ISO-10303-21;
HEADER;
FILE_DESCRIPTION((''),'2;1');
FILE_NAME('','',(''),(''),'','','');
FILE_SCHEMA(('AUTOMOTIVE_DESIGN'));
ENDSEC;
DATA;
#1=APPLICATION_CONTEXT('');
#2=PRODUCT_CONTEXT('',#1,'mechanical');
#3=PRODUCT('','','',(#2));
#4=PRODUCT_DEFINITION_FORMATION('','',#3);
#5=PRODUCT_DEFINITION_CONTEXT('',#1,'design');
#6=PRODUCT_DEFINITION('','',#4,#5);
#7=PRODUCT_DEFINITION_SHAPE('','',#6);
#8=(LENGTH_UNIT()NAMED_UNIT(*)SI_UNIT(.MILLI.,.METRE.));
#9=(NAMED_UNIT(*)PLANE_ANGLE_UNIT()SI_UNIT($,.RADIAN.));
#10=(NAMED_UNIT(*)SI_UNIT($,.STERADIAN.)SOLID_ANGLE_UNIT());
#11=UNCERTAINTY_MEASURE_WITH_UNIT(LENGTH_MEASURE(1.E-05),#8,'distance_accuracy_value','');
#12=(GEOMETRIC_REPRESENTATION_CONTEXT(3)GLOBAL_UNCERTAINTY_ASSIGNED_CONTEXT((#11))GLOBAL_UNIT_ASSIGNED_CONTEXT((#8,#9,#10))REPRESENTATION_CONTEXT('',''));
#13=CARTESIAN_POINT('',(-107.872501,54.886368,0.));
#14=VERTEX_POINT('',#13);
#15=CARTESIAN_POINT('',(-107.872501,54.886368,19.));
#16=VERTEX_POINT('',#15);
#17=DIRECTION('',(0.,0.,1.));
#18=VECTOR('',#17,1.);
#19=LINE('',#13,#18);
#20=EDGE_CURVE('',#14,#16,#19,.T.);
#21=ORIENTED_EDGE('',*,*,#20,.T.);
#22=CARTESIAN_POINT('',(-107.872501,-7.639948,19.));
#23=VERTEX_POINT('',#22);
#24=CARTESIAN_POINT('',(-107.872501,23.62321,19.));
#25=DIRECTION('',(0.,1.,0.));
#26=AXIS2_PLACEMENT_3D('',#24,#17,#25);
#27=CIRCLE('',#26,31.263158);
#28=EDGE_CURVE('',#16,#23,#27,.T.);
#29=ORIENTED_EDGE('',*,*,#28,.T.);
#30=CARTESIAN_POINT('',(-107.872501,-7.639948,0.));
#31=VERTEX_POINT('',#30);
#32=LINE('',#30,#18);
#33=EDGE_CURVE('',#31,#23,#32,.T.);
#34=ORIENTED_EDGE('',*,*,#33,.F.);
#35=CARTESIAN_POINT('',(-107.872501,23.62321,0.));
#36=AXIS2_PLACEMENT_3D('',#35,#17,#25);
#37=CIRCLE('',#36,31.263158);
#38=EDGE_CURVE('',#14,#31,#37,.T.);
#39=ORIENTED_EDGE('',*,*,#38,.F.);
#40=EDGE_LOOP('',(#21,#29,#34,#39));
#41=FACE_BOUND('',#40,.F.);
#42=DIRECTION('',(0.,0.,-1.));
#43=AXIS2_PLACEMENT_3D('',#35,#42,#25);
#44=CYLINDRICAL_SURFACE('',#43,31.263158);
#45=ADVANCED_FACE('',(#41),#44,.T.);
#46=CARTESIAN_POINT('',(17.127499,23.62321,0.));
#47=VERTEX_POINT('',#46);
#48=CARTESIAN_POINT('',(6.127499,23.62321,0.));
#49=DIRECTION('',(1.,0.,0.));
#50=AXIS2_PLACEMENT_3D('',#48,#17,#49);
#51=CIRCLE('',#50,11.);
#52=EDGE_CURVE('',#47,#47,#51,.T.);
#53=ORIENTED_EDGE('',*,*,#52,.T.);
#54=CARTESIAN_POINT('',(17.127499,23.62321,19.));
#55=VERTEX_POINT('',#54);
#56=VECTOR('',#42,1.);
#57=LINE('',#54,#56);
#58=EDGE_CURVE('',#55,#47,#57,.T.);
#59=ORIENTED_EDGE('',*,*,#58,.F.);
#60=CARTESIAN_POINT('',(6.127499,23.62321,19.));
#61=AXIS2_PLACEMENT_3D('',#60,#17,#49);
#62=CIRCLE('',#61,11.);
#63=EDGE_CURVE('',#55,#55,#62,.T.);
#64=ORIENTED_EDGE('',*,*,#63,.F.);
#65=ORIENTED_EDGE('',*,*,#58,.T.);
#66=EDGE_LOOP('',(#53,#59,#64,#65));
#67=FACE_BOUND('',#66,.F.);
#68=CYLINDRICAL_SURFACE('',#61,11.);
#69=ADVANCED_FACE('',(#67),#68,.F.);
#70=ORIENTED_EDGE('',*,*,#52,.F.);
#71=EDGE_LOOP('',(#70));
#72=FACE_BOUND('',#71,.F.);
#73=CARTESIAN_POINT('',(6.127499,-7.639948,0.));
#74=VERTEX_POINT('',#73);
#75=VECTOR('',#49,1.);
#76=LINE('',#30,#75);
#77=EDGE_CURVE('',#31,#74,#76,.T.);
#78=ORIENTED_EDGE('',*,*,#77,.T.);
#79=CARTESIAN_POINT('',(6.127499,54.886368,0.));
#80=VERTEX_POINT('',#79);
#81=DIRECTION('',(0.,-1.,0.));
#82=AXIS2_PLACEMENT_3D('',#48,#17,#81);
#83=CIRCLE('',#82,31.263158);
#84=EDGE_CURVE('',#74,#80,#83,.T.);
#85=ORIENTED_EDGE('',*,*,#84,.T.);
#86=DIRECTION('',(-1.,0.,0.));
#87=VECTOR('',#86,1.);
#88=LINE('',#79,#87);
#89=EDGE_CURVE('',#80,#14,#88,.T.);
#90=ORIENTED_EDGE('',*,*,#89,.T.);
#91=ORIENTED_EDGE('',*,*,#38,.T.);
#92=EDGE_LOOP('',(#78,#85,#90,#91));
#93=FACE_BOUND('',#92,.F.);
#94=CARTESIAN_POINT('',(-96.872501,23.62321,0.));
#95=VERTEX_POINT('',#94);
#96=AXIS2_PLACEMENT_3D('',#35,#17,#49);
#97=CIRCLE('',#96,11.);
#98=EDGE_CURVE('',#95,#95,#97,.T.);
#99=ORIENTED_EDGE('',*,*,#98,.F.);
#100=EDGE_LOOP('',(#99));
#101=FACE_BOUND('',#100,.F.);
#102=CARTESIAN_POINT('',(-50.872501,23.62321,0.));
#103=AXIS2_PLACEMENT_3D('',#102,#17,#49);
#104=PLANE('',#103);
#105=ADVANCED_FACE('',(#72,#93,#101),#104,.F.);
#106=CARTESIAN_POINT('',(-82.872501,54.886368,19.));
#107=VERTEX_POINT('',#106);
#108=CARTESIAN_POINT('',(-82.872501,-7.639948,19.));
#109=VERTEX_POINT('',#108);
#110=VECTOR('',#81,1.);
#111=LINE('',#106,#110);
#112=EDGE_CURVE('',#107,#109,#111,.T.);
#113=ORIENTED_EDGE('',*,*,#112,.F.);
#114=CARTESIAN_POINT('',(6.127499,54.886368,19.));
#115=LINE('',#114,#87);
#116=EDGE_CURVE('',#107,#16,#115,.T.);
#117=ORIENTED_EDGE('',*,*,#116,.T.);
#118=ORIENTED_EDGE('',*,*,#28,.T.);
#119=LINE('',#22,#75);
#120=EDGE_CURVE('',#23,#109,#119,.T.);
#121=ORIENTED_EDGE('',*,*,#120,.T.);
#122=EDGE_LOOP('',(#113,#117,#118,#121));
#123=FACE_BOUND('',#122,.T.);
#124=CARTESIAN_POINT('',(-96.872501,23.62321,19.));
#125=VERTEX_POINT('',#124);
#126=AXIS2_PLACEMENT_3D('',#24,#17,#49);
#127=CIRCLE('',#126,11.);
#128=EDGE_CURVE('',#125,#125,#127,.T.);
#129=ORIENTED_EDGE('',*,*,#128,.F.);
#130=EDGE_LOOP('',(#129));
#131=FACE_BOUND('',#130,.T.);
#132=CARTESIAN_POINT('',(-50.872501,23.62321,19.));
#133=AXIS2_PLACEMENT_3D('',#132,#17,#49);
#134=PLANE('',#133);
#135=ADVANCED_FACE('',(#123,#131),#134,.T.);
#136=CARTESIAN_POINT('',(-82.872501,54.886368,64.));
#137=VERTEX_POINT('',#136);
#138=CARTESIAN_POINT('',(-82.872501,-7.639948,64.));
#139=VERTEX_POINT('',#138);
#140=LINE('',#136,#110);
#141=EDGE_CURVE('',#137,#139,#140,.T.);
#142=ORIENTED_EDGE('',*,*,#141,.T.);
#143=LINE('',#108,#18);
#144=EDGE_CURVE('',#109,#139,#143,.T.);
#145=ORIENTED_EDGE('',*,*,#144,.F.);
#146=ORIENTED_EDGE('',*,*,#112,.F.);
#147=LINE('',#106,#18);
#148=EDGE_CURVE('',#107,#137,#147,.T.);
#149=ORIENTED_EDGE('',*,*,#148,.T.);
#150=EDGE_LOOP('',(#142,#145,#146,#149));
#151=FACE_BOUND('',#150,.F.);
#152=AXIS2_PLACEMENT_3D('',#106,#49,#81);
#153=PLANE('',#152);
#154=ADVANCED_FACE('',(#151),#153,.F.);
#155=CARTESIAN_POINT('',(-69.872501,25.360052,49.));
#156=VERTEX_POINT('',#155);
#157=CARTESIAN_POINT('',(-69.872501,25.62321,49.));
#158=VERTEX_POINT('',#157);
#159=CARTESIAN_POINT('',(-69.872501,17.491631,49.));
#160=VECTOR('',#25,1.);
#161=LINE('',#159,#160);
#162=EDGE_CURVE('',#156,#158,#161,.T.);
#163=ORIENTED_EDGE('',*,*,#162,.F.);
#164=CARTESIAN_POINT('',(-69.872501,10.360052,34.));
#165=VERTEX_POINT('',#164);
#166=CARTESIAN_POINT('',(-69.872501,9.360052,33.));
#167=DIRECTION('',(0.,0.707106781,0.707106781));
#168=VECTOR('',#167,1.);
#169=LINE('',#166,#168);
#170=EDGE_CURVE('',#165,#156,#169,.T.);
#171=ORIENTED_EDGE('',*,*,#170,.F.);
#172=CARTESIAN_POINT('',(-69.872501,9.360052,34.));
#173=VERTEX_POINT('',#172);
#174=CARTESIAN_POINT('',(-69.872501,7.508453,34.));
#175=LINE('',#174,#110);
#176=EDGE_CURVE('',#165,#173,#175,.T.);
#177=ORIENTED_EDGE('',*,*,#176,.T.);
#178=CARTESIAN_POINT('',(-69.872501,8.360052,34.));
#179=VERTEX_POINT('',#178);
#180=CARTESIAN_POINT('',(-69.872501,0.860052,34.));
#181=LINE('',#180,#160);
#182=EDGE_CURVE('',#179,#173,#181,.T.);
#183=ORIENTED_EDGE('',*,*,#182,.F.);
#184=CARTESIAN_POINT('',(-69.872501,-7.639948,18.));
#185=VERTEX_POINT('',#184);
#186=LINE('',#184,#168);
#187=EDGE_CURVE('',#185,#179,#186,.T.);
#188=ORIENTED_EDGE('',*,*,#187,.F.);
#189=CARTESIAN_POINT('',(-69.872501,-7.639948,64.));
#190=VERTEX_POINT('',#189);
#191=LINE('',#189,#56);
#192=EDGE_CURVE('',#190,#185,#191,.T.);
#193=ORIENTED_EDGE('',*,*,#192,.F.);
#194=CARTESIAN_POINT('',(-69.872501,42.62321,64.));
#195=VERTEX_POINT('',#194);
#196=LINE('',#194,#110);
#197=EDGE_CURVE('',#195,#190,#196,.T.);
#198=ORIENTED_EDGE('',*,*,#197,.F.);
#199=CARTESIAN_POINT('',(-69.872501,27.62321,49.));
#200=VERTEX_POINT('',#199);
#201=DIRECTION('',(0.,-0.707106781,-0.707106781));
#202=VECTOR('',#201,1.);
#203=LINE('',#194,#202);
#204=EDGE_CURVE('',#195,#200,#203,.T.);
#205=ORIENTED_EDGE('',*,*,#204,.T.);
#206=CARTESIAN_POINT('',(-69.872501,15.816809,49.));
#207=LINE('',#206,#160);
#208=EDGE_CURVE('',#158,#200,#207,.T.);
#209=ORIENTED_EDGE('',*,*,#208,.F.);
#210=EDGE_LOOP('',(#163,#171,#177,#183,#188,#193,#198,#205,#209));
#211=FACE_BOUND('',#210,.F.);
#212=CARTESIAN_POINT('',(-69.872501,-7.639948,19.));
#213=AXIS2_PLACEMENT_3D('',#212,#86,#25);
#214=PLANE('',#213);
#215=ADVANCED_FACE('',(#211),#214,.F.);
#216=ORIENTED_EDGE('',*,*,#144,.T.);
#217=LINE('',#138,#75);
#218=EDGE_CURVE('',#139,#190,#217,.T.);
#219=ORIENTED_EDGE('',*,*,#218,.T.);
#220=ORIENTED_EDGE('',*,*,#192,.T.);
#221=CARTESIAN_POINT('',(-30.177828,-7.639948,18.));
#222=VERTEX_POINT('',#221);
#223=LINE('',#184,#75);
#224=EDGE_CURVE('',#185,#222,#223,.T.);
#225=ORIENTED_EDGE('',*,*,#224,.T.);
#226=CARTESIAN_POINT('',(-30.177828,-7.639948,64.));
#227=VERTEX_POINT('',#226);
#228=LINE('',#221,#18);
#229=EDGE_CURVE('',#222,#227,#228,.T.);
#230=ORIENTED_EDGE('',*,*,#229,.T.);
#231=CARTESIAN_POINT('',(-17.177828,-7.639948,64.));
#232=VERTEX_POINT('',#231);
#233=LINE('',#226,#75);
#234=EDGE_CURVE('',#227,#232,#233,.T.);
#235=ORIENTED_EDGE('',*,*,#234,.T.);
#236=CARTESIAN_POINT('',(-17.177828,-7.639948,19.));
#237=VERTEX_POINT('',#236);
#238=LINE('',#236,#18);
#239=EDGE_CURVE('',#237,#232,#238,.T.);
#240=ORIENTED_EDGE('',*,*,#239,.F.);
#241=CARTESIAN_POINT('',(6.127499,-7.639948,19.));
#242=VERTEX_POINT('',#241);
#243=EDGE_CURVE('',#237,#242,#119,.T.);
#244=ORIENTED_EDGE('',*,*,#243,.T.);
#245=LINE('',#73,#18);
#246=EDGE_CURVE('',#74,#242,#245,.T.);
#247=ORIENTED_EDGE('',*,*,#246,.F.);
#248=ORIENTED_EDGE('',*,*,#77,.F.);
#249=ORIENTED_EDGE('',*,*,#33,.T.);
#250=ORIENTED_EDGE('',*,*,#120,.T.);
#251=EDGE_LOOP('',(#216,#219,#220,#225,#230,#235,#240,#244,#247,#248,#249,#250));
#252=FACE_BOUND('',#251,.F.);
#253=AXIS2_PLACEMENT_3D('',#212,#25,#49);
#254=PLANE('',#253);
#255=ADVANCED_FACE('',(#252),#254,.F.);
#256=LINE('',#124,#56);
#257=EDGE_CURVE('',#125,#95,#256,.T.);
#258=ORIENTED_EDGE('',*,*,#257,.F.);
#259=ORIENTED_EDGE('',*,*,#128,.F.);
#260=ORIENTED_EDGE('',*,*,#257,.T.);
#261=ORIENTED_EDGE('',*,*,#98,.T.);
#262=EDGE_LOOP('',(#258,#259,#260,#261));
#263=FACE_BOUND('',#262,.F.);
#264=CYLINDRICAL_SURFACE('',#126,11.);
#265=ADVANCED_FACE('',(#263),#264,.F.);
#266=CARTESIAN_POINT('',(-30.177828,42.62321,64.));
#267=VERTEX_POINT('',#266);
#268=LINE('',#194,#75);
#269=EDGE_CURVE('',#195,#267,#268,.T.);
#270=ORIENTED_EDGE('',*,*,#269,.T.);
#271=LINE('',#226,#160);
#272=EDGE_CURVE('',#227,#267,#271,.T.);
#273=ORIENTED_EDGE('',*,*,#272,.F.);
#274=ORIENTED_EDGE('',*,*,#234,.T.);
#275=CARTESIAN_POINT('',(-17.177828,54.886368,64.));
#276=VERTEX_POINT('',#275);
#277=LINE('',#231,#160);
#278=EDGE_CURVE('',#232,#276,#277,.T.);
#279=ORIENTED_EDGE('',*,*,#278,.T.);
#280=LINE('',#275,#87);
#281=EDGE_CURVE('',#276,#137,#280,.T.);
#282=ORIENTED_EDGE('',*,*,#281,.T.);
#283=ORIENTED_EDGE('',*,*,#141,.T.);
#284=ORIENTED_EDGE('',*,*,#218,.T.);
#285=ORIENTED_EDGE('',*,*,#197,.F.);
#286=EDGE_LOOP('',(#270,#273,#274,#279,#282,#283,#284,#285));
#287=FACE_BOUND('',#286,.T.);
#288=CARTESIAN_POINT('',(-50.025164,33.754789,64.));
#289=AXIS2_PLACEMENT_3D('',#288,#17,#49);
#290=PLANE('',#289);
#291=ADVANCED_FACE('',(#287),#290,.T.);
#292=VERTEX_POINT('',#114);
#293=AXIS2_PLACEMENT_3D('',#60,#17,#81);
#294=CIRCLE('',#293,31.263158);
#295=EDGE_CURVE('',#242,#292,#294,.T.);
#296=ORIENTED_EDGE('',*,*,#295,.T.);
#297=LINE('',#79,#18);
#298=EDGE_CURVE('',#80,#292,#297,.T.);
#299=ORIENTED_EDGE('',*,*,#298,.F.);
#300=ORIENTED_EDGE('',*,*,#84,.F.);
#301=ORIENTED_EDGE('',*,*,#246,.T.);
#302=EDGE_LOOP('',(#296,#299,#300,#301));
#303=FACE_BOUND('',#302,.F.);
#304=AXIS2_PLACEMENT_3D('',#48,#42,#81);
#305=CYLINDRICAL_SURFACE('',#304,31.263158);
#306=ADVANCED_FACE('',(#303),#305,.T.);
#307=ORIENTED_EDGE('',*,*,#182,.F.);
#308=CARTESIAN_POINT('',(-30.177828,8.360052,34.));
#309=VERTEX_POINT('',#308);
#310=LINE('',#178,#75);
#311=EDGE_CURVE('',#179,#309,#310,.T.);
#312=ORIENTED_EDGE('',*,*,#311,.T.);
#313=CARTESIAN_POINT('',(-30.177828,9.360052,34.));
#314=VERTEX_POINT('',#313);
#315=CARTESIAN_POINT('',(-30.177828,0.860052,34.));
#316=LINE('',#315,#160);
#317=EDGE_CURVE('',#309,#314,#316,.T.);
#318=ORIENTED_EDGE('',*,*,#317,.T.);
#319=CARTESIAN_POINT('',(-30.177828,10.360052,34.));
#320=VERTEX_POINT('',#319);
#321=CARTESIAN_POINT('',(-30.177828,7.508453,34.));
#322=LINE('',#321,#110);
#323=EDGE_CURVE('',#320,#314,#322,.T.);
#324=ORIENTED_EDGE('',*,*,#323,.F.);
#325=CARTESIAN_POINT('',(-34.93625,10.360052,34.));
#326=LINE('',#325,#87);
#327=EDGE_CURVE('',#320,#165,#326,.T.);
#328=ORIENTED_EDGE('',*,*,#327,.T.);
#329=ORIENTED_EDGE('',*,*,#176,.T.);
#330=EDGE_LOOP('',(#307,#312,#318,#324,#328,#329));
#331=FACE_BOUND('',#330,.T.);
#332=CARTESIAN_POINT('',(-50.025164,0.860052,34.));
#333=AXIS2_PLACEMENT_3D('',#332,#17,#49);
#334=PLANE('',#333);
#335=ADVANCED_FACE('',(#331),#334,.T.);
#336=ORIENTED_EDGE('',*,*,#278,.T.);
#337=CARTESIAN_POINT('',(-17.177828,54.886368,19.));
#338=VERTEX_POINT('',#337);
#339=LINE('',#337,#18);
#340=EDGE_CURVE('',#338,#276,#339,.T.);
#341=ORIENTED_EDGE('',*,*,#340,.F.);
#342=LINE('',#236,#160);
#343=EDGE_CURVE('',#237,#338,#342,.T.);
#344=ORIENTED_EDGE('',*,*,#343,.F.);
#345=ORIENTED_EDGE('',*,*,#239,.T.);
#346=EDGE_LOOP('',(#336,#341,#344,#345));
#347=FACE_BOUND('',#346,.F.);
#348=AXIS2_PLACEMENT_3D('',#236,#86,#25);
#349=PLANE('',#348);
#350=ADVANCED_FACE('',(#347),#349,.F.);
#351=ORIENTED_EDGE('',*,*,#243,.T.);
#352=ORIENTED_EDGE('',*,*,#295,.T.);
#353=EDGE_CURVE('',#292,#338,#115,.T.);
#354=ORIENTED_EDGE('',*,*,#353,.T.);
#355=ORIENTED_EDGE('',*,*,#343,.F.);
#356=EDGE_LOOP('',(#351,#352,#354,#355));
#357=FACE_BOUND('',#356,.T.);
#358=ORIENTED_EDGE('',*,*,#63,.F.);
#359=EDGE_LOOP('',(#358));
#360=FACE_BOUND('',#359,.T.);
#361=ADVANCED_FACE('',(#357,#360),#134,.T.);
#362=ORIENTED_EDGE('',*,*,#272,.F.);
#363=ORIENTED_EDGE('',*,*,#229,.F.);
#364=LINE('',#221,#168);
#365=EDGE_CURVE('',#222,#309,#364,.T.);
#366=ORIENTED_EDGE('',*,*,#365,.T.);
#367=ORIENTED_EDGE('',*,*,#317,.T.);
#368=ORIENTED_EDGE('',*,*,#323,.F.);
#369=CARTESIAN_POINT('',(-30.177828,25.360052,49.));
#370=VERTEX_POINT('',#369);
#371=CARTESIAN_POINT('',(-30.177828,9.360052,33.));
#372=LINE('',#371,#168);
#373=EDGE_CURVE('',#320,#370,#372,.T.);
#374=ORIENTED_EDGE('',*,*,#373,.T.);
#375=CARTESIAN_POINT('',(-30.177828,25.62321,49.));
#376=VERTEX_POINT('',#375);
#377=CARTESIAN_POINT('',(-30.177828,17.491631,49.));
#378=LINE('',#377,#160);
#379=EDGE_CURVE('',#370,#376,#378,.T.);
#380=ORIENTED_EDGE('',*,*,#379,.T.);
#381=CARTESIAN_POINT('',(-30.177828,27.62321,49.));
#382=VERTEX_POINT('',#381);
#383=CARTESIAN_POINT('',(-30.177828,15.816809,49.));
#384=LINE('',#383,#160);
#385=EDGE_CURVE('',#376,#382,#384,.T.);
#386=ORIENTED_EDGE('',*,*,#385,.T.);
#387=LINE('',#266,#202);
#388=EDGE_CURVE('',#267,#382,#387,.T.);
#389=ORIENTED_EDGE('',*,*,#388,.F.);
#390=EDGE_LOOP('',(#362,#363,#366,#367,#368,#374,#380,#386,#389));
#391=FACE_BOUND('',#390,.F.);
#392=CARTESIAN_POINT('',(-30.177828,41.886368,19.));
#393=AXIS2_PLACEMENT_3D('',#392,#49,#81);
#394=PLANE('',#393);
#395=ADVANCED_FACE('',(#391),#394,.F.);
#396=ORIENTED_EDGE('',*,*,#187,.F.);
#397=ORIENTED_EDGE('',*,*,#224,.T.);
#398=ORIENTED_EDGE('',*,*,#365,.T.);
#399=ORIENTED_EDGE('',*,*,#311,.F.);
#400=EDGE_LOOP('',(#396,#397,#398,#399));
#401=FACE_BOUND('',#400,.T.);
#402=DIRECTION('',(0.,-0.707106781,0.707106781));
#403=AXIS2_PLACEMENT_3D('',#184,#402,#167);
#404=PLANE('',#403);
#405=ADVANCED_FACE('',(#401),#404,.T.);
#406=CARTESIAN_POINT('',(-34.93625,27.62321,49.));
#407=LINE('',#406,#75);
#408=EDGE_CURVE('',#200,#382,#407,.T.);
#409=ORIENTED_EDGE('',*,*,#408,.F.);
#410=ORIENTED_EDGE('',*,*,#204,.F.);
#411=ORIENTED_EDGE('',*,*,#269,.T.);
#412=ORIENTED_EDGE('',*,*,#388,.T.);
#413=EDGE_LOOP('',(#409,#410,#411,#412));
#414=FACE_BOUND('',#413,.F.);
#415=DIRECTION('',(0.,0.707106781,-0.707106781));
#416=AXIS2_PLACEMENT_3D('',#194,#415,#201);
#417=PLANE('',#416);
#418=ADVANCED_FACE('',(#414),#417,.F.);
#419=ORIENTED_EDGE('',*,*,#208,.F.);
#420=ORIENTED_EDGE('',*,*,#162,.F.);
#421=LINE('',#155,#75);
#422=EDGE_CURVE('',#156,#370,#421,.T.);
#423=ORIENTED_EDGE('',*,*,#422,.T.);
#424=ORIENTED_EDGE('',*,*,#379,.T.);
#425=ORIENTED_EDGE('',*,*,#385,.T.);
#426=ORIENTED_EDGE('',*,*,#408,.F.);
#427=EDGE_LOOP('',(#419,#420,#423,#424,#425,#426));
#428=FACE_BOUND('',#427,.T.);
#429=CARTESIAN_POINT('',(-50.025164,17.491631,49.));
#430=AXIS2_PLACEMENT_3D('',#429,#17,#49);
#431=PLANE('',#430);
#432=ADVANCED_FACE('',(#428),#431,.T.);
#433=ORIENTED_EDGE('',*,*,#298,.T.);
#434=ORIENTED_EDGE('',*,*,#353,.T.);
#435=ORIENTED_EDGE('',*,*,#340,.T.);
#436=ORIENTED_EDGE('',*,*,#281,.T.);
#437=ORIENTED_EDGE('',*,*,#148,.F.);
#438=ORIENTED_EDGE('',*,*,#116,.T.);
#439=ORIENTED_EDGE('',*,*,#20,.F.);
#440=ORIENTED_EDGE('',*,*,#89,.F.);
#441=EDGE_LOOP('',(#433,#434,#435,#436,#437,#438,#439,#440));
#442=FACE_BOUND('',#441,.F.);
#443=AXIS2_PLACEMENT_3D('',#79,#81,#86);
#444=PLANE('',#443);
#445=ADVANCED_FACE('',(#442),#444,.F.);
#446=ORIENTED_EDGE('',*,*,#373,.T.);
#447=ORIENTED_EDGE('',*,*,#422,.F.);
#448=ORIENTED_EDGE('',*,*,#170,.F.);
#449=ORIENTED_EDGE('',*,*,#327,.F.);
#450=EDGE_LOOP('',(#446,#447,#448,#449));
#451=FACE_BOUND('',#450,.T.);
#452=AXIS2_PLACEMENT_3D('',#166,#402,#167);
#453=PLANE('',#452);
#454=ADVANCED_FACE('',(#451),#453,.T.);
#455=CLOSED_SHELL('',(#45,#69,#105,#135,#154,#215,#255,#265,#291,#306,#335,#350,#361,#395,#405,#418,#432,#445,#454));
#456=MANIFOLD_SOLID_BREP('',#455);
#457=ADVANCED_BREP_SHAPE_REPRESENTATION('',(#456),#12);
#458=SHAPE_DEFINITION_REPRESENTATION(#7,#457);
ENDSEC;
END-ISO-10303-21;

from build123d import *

# Parameters (mm, degrees)
F1_DEPTH     = 19
F2_R         = 11
F3_DEPTH     = 19
F5_DEPTH     = 45
F6_W         = 39.6946725957
F6_H         = 17
F7_DEPTH     = 15
F8_W         = 39.6946725957
F8_H         = 16.2631579523
F9_DEPTH     = 30
F10_T1_DEPTH = 39.6946725957
F10_T6_DEPTH = 39.6946725957
F11_W        = 39.6946725957
F11_H        = 16.2631579523
F12_DEPTH    = 45
F13_T4_DEPTH = 39.6946725957


# Not quite as in the source:
# - a fillet or chamfer that OpenCascade refuses, or shapes differently, is made with other operations: its cross-section is extruded or revolved along the edge and cut away or added


with BuildPart() as f1:
    # F0 (on Top) → F1 (new body)
    with BuildSketch(Plane.XY):
        with BuildLine():
            ThreePointArc((-107.8725005202, 54.8863680974), (-139.1356584725, 23.6232101452), (-107.8725005202, -7.6399478071))
            Line((-107.8725005202, -7.6399478071), (6.1274994798, -7.6399478071))
            ThreePointArc((6.1274994798, -7.6399478071), (37.3906574321, 23.6232101452), (6.1274994798, 54.8863680974))
            Line((6.1274994798, 54.8863680974), (-107.8725005202, 54.8863680974))
        make_face()
    extrude(amount=F1_DEPTH)

    # F2 (on face) → F3 (cut)
    with BuildSketch(Plane.XY.offset(19)):
        with Locations((-107.8725005202, 23.6232101452)):
            Circle(F2_R)
        with Locations((6.1274994798, 23.6232101452)):
            Circle(F2_R)
    extrude(amount=-F3_DEPTH, mode=Mode.SUBTRACT)

    # F4 (on face) → F5 (join)
    with BuildSketch(Plane.XY.offset(19)):
        Polygon((-17.1778279245, 54.8863680974), (-82.8725005202, 54.8863680974), (-82.8725005202, -7.6399478071), (-69.8725005202, -7.6399478071), (-69.8725005202, 41.8863680974), (-30.1778279245, 41.8863680974), (-30.1778279245, -7.6399478071), (-17.1778279245, -7.6399478071), align=None)
    extrude(amount=F5_DEPTH)

    # F6 (on face) → F7 (join)
    with BuildSketch(Plane.XY.offset(19)):
        with Locations((-50.0251642223, 0.8600521929)):
            Rectangle(F6_W, F6_H)
    extrude(amount=F7_DEPTH)

    # F8 (on face) → F9 (join)
    with BuildSketch(Plane.XY.offset(19)):
        with Locations((-50.0251642223, 17.491631169)):
            Rectangle(F8_W, F8_H)
    extrude(amount=F9_DEPTH)

    # F10: chamfer of 16 on 2 edges, made by hand

    # F10_s2 → F10_t1 (cut)
    with BuildSketch(Plane.YZ.offset(-69.8725005202)):
        Polygon((-7.6399478071, 18), (8.3600521929, 34), (-7.6399478071, 34), align=None)
    extrude(amount=F10_T1_DEPTH, mode=Mode.SUBTRACT)


with BuildPart() as f10_tool4:
    # F10_s5 → F10_t6 (new body)
    with BuildSketch(Plane.YZ.offset(-69.8725005202)):
        Polygon((9.3600521929, 33), (25.3600521929, 49), (9.3600521929, 49), align=None)
    extrude(amount=F10_T6_DEPTH)

    split(bisect_by=Plane.XY.offset(34), keep=Keep.TOP)


with BuildPart() as f1_1:
    add(f1.part)

    # F10_t3: cut F10_tool4
    add(f10_tool4.part, mode=Mode.SUBTRACT)

    # F11 (on face) → F12 (join)
    with BuildSketch(Plane.XY.offset(19)):
        with Locations((-50.0251642223, 33.7547891213)):
            Rectangle(F11_W, F11_H)
    extrude(amount=F12_DEPTH)

    # F13: chamfer of 17 on 1 edges, made by hand


with BuildPart() as f13_tool2:
    # F13_s3 → F13_t4 (new body)
    with BuildSketch(Plane.YZ.offset(-69.8725005202)):
        Polygon((42.6232101452, 64), (25.6232101452, 47), (25.6232101452, 64), align=None)
    extrude(amount=F13_T4_DEPTH)

    split(bisect_by=Plane.XY.offset(49), keep=Keep.TOP)


with BuildPart() as f1_2:
    add(f1_1.part)

    # F13_t1: cut F13_tool2
    add(f13_tool2.part, mode=Mode.SUBTRACT)


solid = f1_2.part
